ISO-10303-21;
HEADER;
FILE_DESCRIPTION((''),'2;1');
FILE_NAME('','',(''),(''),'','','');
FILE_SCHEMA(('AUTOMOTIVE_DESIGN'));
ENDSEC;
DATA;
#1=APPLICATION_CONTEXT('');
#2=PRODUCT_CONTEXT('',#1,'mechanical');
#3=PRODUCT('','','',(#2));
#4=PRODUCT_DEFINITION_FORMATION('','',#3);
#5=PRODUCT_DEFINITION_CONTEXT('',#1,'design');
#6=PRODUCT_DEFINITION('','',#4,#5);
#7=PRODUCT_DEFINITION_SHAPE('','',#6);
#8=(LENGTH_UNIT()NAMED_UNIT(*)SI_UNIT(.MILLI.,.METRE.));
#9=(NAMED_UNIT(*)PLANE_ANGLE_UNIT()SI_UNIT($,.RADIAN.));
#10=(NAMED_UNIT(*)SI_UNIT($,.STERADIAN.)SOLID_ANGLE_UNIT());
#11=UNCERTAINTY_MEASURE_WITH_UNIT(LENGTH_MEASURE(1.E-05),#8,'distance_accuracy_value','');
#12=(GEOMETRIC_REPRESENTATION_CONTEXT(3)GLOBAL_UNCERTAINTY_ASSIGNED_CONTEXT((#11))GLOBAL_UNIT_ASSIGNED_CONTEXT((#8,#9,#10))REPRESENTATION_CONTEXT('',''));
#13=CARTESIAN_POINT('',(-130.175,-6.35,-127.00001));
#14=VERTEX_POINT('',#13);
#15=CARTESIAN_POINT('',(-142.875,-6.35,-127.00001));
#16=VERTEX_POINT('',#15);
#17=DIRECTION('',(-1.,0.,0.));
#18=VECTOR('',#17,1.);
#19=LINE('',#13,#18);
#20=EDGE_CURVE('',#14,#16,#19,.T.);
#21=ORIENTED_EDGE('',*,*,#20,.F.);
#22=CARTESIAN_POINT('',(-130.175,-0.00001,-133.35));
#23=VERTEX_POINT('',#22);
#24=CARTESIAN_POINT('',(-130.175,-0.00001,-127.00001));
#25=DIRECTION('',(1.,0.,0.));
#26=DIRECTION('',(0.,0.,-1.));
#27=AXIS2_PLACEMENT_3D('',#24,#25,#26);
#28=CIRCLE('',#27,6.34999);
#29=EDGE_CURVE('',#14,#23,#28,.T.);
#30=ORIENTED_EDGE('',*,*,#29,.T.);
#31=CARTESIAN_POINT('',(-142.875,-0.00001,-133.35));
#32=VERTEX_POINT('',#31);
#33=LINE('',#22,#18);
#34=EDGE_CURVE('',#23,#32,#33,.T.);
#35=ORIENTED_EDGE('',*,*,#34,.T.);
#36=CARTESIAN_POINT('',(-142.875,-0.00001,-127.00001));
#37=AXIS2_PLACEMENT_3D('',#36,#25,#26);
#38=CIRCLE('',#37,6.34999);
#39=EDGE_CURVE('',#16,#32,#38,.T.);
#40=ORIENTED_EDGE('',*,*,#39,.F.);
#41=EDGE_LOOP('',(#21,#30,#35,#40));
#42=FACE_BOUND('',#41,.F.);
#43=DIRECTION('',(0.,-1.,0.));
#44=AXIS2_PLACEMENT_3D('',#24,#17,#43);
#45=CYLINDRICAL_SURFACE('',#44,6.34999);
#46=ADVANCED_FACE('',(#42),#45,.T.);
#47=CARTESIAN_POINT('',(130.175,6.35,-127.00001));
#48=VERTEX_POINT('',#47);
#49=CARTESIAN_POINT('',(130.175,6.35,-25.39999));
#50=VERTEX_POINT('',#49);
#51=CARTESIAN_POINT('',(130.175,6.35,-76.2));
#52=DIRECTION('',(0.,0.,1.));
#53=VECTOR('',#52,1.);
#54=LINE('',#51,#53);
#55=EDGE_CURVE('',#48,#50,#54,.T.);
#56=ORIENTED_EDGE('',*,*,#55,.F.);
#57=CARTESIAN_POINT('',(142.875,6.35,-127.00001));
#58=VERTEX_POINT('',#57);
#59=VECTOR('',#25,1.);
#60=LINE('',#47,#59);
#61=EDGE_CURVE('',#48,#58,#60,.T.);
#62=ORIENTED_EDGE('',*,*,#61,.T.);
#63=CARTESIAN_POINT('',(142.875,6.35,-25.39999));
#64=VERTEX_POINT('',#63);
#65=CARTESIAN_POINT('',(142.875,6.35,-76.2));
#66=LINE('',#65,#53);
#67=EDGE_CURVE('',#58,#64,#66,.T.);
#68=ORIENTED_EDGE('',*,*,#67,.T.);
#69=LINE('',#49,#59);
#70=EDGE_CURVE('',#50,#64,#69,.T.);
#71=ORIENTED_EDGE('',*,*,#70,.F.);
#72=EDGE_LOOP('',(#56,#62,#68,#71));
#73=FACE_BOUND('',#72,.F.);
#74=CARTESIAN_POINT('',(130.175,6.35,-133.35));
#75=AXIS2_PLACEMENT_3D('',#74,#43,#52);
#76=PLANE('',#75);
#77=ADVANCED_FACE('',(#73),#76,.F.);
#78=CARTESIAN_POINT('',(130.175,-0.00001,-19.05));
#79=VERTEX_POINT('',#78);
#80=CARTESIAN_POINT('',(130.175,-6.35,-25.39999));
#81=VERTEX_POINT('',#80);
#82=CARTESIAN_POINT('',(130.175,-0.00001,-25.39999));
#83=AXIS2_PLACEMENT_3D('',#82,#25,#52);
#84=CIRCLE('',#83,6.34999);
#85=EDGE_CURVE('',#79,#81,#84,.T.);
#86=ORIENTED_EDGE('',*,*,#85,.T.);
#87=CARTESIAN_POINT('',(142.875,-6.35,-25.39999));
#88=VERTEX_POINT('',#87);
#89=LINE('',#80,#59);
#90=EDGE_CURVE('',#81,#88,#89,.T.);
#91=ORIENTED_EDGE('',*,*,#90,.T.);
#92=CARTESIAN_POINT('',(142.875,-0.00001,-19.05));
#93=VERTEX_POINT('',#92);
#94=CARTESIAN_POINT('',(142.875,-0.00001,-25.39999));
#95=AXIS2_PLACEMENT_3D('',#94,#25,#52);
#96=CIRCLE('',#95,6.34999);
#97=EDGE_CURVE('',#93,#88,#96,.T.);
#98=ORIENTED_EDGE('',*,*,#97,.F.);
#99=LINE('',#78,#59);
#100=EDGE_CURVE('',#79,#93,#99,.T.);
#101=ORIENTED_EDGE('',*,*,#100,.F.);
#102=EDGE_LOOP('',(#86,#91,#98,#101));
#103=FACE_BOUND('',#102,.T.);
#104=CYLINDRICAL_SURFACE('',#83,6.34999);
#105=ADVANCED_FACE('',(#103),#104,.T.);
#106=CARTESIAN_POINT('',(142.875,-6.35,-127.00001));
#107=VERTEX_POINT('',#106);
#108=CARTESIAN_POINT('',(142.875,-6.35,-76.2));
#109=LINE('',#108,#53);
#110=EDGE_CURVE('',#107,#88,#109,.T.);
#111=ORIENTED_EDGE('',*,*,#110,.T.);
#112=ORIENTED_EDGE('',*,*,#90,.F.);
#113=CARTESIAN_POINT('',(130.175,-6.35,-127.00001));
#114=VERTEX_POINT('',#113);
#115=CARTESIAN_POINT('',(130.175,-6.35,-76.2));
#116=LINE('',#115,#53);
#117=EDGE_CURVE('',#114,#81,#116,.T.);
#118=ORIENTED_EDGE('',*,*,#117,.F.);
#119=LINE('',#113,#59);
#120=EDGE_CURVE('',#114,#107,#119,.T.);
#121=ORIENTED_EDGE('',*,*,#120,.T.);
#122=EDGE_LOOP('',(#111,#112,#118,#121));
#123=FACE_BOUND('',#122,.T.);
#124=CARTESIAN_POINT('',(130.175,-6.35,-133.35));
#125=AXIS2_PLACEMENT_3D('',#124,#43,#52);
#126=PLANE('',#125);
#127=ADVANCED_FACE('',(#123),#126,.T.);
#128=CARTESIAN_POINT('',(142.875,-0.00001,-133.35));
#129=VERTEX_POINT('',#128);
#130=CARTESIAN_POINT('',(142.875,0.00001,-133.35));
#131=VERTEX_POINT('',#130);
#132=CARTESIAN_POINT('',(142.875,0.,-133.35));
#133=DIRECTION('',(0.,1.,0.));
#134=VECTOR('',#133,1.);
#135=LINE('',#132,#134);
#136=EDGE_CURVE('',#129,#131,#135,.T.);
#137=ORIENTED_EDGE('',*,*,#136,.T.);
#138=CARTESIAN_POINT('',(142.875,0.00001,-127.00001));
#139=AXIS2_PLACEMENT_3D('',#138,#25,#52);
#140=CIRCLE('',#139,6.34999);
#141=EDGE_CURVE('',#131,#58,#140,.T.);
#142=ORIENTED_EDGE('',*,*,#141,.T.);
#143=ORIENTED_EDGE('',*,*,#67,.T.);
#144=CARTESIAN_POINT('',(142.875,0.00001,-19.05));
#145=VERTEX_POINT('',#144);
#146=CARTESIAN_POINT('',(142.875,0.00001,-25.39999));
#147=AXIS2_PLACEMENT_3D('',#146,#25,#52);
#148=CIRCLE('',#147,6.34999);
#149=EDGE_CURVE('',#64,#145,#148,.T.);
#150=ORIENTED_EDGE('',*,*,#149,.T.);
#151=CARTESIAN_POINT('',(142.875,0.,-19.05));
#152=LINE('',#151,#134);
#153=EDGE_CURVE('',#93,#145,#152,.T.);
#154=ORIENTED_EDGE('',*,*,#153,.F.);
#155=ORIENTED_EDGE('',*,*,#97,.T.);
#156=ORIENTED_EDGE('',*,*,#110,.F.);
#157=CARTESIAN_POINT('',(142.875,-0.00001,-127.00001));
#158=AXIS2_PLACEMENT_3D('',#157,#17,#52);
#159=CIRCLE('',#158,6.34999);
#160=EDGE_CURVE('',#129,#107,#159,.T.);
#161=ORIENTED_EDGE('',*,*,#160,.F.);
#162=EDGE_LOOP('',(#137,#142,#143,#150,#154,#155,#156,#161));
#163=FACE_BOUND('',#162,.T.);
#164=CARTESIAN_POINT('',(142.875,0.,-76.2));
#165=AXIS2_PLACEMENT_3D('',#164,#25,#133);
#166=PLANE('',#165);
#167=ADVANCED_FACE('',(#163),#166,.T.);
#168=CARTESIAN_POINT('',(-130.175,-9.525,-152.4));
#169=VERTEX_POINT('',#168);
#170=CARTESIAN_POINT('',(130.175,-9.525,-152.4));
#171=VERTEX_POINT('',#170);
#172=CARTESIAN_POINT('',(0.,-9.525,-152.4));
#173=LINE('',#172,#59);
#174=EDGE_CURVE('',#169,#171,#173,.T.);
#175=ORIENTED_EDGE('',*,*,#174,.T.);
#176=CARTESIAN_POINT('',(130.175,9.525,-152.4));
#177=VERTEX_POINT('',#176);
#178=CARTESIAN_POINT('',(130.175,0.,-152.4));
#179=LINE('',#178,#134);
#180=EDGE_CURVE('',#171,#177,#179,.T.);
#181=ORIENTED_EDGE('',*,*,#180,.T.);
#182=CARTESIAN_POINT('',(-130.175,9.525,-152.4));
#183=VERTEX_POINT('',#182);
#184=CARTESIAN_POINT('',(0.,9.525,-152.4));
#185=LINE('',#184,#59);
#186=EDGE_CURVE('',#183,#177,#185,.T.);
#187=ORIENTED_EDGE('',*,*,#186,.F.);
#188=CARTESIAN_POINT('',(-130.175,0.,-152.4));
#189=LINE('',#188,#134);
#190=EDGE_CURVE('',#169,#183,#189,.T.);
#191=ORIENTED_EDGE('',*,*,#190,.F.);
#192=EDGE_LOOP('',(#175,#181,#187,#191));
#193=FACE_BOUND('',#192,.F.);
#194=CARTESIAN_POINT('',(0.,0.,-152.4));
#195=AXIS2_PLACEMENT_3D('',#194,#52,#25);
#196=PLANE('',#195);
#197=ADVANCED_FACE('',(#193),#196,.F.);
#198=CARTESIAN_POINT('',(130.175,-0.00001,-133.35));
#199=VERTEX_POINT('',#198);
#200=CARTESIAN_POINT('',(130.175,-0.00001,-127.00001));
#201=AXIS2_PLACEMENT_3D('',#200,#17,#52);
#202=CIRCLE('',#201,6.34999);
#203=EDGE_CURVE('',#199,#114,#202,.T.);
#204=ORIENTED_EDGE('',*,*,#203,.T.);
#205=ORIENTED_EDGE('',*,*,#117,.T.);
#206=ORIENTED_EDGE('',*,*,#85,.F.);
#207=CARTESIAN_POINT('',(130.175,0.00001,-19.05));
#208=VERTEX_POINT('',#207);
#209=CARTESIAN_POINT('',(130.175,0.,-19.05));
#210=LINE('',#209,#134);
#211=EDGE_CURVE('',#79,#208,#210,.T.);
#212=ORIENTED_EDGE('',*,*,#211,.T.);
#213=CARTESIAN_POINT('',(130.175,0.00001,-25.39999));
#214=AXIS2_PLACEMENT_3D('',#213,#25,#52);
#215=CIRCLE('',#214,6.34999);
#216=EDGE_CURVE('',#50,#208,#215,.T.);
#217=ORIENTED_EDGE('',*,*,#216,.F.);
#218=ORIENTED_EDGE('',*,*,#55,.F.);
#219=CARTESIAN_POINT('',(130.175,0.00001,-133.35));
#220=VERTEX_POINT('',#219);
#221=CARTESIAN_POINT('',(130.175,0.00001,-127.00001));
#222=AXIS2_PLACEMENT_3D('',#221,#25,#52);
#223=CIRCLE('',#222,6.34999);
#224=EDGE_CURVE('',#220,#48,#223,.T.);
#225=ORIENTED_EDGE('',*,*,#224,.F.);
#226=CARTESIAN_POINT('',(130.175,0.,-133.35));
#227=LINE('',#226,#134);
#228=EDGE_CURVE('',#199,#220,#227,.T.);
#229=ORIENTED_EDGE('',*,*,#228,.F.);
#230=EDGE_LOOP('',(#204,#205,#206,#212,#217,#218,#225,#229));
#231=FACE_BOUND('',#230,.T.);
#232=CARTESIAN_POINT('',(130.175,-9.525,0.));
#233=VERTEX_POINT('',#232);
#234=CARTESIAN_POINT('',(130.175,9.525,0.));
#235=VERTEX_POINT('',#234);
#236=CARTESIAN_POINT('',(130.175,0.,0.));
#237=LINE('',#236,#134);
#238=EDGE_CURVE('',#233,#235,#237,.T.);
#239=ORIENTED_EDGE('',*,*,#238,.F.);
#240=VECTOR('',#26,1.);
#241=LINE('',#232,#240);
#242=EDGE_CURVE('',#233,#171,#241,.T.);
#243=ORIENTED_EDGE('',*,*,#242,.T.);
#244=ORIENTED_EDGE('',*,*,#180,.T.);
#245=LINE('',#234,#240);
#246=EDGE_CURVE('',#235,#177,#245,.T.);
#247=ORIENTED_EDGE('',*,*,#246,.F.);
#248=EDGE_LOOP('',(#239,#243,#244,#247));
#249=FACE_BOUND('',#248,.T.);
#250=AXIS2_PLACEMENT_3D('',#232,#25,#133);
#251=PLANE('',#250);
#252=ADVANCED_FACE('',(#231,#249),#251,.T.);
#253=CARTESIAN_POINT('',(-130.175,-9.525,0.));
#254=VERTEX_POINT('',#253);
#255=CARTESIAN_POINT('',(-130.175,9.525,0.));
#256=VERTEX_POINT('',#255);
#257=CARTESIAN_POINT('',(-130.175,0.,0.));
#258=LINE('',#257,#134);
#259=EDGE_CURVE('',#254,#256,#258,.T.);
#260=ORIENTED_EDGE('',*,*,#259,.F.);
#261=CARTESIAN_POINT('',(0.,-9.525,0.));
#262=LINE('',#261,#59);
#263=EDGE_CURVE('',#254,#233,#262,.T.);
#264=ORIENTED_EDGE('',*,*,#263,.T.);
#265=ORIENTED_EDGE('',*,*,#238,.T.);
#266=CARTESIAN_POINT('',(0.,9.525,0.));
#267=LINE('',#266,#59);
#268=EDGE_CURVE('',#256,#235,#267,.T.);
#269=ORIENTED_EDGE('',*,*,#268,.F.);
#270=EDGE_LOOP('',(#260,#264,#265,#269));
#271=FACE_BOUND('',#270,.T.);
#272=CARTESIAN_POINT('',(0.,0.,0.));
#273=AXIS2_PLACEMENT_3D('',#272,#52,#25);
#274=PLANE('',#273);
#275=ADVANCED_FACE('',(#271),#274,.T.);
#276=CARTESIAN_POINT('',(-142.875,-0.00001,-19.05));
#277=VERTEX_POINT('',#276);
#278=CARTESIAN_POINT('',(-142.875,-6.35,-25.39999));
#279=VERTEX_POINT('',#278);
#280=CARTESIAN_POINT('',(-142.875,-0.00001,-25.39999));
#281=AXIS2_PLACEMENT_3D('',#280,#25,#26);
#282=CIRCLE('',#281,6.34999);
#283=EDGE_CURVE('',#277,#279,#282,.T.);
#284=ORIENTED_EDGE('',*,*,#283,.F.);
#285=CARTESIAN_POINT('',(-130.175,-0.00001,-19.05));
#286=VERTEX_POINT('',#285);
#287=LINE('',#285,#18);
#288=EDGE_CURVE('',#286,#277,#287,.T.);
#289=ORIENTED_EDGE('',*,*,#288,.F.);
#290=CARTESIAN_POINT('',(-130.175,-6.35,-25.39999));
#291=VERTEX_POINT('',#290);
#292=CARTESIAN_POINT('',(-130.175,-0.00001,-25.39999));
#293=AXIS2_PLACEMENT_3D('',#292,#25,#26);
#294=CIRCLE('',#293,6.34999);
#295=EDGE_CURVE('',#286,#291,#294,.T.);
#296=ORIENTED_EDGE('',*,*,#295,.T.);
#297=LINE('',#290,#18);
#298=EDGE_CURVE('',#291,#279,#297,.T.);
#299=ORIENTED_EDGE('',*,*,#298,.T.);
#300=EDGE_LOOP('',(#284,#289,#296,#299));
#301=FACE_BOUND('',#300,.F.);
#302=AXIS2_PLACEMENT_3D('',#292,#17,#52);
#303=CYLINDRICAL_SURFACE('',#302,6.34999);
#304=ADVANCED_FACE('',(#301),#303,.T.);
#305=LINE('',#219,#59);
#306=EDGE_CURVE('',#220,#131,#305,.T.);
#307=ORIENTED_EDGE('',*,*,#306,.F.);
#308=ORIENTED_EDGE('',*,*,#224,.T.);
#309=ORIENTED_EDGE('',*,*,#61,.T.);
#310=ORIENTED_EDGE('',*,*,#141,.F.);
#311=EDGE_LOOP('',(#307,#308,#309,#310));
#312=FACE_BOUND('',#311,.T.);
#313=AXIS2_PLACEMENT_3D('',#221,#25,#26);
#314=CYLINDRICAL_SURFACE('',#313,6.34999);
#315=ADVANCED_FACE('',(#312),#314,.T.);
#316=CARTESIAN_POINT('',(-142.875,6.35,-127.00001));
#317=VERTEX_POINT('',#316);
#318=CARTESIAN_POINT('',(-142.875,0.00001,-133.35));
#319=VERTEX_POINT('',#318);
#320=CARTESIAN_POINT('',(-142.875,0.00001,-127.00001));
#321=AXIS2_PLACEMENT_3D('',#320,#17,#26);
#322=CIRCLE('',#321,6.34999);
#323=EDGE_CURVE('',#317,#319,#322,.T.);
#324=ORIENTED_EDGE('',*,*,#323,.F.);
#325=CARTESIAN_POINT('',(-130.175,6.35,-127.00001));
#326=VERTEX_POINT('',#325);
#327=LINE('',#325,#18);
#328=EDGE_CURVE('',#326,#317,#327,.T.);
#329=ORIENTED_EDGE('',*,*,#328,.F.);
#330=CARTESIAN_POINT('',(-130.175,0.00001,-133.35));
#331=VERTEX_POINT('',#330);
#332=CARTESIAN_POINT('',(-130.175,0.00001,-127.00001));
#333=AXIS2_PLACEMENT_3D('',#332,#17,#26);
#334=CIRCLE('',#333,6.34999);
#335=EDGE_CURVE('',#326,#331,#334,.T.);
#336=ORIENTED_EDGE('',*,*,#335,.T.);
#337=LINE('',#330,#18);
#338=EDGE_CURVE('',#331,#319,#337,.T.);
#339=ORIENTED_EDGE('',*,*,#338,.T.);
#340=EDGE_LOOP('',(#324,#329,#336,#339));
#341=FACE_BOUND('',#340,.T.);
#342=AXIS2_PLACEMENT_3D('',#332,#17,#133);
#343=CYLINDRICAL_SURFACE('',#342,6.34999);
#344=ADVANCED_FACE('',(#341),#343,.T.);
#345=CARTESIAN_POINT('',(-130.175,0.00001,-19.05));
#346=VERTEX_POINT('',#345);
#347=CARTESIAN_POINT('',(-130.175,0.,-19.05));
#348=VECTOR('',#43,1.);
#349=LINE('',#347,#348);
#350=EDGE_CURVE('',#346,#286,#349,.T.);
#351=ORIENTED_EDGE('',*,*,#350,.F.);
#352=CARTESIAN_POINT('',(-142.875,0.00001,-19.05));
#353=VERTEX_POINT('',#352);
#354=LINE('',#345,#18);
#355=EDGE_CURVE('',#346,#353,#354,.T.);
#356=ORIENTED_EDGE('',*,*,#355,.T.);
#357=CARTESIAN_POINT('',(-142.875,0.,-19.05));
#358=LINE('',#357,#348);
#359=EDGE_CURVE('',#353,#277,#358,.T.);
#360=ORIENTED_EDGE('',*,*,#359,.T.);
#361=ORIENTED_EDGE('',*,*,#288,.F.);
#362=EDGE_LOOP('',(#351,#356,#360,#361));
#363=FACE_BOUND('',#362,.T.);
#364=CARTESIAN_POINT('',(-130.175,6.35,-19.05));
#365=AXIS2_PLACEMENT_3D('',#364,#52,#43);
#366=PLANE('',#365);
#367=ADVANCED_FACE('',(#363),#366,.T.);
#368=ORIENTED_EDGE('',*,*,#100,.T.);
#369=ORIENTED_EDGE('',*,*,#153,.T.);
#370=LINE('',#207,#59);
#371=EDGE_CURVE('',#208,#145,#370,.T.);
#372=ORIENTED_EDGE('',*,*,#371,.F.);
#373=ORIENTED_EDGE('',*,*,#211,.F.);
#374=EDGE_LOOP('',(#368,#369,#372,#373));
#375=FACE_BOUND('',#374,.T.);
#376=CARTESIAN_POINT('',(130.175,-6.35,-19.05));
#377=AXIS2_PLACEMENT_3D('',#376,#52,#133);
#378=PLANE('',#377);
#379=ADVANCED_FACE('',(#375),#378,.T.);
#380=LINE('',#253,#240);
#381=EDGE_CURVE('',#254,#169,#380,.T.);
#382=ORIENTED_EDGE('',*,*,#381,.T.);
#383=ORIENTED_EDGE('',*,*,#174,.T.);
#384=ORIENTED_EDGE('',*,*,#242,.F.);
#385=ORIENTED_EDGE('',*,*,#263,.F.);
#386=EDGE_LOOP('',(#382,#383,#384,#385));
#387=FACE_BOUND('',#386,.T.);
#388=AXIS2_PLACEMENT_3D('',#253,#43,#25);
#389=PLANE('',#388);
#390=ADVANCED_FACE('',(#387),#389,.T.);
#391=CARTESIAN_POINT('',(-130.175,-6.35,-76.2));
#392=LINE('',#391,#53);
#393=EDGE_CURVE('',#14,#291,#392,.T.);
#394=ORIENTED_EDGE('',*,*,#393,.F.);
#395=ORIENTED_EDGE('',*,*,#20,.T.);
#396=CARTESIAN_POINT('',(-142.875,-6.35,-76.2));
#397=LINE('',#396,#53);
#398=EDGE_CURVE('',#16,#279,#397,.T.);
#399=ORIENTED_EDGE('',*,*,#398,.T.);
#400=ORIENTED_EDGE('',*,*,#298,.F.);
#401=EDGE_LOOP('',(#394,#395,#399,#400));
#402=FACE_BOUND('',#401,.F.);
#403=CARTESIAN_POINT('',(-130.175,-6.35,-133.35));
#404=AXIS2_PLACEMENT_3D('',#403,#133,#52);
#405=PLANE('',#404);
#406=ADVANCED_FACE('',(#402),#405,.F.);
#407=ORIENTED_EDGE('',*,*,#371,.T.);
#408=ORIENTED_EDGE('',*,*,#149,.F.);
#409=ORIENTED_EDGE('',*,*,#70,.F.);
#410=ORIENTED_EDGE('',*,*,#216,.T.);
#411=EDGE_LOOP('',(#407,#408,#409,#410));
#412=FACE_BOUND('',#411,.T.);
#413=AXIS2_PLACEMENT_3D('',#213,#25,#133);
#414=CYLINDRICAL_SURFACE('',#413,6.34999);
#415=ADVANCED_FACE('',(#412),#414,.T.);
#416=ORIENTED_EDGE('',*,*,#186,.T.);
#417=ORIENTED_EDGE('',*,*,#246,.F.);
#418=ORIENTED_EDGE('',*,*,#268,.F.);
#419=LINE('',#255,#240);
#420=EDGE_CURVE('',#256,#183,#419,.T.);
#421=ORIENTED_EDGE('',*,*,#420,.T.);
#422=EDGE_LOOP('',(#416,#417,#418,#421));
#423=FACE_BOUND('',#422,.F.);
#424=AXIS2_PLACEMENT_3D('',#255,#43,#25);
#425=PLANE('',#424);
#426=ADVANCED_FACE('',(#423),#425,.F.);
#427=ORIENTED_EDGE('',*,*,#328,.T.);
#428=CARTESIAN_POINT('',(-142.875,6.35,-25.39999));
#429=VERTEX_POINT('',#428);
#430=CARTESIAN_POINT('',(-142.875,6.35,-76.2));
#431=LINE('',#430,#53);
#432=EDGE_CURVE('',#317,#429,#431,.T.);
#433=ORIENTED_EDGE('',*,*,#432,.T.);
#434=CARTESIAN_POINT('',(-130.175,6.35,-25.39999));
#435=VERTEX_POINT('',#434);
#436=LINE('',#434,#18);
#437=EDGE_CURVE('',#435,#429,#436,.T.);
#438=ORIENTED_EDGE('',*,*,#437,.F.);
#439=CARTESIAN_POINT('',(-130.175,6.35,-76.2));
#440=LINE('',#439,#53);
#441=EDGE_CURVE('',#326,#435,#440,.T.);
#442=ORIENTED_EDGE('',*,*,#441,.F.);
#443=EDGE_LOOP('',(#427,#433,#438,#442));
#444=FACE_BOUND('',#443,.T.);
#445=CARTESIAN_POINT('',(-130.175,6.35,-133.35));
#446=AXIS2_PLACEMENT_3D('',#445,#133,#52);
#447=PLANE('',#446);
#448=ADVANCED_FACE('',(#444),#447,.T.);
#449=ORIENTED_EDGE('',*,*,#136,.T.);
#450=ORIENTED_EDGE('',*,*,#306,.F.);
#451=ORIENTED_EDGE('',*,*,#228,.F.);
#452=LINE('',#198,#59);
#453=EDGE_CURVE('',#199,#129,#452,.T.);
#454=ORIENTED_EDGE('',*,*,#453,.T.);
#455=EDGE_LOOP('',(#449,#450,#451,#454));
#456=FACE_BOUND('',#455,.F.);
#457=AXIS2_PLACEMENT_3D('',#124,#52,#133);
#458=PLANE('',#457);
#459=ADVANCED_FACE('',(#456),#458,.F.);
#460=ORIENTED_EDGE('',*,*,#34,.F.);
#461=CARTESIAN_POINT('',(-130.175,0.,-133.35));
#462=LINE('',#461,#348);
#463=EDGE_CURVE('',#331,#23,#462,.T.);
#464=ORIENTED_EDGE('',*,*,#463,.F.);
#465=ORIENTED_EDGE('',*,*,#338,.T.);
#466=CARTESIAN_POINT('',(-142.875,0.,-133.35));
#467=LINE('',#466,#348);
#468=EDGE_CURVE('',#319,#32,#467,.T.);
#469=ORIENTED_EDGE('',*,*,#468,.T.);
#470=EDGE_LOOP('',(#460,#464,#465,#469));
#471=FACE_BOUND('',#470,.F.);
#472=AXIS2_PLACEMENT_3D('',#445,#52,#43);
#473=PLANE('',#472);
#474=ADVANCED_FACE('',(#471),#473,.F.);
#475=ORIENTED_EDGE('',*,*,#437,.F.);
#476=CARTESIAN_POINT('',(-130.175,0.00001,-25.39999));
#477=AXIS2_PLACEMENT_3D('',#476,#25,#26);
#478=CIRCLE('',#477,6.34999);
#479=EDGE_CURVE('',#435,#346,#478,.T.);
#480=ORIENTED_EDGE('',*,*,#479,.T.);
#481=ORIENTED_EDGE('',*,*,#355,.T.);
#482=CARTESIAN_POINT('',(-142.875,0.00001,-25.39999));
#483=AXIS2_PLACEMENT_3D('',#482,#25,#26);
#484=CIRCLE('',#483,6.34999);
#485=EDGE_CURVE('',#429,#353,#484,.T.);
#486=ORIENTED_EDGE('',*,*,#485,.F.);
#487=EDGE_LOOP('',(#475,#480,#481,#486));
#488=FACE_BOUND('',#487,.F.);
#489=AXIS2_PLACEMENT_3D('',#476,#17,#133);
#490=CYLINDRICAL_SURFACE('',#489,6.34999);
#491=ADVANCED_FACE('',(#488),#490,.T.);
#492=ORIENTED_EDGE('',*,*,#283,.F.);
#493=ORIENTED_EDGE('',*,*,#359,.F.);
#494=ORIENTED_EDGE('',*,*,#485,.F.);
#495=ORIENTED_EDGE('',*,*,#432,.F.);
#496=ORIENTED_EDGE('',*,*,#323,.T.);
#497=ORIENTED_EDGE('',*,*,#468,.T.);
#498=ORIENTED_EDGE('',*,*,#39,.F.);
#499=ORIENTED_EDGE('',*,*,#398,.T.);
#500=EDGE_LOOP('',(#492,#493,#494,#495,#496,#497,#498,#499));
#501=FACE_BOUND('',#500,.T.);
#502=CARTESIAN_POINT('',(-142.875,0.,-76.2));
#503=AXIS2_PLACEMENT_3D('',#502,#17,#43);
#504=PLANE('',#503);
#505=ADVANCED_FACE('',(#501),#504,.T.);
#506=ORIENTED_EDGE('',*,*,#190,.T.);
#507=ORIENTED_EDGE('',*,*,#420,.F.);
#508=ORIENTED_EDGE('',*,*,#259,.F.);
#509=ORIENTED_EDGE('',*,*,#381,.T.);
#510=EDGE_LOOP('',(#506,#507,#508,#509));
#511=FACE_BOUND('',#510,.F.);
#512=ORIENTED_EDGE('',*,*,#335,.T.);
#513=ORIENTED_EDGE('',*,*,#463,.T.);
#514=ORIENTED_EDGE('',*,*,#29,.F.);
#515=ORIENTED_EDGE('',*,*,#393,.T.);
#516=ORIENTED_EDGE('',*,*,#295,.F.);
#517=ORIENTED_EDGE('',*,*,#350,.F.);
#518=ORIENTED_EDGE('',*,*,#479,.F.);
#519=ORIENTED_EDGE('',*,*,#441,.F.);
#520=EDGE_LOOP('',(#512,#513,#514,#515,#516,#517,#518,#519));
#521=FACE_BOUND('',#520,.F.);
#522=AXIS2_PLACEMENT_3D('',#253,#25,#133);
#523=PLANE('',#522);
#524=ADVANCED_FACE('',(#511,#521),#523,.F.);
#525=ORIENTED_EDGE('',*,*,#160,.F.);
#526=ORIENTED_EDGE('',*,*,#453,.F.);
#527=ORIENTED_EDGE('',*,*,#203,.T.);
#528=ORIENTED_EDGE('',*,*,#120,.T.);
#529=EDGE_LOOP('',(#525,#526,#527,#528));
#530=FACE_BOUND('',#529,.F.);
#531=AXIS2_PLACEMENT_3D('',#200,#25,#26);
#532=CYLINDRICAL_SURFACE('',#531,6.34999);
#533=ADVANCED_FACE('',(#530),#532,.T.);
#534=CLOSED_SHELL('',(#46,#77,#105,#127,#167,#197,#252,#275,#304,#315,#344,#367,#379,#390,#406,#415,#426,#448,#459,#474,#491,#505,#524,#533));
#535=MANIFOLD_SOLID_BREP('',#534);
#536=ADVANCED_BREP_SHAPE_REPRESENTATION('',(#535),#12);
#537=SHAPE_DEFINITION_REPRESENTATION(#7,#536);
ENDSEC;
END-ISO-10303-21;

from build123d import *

# Parameters (mm, degrees)
F0_W     = 260.35
F0_H     = 19.05
F1_DEPTH = 152.4
F2_W     = 12.7
F2_H     = 114.3
F3_DEPTH = 12.7
F4_R     = 6.34999
F5_W     = 12.7
F5_H     = 114.3
F6_DEPTH = 12.7
F7_R     = 6.34999


# Not quite as in the source:
# - a fillet or chamfer is up to 0.001 mm smaller than in the source, because OpenCascade refuses the exact size


with BuildPart() as f1:
    # F0 (on Top) → F1 (new body)
    with BuildSketch(Plane.XY):
        Rectangle(F0_W, F0_H)
    extrude(amount=-F1_DEPTH)

    # F2 (on face) → F3 (join)
    with BuildSketch(Plane(origin=(-130.175, 0, 0), x_dir=(0, -1, 0), z_dir=(-1, 0, 0))):
        with Locations((0, -76.2)):
            Rectangle(F2_W, F2_H)
    extrude(amount=F3_DEPTH)

    # F4 (radius 6.35 in the source; OpenCascade refuses exactly that, so slightly less here)
    f4_edges = [f1.edges().sort_by_distance(p)[0] for p in [
        (-136.525, 6.35, -19.05),
        (-136.525, -6.35, -19.05),
        (-136.525, -6.35, -133.35),
        (-136.525, 6.35, -133.35),
    ]]
    fillet(f4_edges, radius=F4_R)

    # F5 (on face) → F6 (join)
    with BuildSketch(Plane.YZ.offset(130.175)):
        with Locations((0, -76.2)):
            Rectangle(F5_W, F5_H)
    extrude(amount=F6_DEPTH)

    # F7 (radius 6.35 in the source; OpenCascade refuses exactly that, so slightly less here)
    f7_edges = [f1.edges().sort_by_distance(p)[0] for p in [
        (136.525, -6.35, -19.05),
        (136.525, 6.35, -19.05),
        (136.525, 6.35, -133.35),
        (136.525, -6.35, -133.35),
    ]]
    fillet(f7_edges, radius=F7_R)


solid = f1.part
